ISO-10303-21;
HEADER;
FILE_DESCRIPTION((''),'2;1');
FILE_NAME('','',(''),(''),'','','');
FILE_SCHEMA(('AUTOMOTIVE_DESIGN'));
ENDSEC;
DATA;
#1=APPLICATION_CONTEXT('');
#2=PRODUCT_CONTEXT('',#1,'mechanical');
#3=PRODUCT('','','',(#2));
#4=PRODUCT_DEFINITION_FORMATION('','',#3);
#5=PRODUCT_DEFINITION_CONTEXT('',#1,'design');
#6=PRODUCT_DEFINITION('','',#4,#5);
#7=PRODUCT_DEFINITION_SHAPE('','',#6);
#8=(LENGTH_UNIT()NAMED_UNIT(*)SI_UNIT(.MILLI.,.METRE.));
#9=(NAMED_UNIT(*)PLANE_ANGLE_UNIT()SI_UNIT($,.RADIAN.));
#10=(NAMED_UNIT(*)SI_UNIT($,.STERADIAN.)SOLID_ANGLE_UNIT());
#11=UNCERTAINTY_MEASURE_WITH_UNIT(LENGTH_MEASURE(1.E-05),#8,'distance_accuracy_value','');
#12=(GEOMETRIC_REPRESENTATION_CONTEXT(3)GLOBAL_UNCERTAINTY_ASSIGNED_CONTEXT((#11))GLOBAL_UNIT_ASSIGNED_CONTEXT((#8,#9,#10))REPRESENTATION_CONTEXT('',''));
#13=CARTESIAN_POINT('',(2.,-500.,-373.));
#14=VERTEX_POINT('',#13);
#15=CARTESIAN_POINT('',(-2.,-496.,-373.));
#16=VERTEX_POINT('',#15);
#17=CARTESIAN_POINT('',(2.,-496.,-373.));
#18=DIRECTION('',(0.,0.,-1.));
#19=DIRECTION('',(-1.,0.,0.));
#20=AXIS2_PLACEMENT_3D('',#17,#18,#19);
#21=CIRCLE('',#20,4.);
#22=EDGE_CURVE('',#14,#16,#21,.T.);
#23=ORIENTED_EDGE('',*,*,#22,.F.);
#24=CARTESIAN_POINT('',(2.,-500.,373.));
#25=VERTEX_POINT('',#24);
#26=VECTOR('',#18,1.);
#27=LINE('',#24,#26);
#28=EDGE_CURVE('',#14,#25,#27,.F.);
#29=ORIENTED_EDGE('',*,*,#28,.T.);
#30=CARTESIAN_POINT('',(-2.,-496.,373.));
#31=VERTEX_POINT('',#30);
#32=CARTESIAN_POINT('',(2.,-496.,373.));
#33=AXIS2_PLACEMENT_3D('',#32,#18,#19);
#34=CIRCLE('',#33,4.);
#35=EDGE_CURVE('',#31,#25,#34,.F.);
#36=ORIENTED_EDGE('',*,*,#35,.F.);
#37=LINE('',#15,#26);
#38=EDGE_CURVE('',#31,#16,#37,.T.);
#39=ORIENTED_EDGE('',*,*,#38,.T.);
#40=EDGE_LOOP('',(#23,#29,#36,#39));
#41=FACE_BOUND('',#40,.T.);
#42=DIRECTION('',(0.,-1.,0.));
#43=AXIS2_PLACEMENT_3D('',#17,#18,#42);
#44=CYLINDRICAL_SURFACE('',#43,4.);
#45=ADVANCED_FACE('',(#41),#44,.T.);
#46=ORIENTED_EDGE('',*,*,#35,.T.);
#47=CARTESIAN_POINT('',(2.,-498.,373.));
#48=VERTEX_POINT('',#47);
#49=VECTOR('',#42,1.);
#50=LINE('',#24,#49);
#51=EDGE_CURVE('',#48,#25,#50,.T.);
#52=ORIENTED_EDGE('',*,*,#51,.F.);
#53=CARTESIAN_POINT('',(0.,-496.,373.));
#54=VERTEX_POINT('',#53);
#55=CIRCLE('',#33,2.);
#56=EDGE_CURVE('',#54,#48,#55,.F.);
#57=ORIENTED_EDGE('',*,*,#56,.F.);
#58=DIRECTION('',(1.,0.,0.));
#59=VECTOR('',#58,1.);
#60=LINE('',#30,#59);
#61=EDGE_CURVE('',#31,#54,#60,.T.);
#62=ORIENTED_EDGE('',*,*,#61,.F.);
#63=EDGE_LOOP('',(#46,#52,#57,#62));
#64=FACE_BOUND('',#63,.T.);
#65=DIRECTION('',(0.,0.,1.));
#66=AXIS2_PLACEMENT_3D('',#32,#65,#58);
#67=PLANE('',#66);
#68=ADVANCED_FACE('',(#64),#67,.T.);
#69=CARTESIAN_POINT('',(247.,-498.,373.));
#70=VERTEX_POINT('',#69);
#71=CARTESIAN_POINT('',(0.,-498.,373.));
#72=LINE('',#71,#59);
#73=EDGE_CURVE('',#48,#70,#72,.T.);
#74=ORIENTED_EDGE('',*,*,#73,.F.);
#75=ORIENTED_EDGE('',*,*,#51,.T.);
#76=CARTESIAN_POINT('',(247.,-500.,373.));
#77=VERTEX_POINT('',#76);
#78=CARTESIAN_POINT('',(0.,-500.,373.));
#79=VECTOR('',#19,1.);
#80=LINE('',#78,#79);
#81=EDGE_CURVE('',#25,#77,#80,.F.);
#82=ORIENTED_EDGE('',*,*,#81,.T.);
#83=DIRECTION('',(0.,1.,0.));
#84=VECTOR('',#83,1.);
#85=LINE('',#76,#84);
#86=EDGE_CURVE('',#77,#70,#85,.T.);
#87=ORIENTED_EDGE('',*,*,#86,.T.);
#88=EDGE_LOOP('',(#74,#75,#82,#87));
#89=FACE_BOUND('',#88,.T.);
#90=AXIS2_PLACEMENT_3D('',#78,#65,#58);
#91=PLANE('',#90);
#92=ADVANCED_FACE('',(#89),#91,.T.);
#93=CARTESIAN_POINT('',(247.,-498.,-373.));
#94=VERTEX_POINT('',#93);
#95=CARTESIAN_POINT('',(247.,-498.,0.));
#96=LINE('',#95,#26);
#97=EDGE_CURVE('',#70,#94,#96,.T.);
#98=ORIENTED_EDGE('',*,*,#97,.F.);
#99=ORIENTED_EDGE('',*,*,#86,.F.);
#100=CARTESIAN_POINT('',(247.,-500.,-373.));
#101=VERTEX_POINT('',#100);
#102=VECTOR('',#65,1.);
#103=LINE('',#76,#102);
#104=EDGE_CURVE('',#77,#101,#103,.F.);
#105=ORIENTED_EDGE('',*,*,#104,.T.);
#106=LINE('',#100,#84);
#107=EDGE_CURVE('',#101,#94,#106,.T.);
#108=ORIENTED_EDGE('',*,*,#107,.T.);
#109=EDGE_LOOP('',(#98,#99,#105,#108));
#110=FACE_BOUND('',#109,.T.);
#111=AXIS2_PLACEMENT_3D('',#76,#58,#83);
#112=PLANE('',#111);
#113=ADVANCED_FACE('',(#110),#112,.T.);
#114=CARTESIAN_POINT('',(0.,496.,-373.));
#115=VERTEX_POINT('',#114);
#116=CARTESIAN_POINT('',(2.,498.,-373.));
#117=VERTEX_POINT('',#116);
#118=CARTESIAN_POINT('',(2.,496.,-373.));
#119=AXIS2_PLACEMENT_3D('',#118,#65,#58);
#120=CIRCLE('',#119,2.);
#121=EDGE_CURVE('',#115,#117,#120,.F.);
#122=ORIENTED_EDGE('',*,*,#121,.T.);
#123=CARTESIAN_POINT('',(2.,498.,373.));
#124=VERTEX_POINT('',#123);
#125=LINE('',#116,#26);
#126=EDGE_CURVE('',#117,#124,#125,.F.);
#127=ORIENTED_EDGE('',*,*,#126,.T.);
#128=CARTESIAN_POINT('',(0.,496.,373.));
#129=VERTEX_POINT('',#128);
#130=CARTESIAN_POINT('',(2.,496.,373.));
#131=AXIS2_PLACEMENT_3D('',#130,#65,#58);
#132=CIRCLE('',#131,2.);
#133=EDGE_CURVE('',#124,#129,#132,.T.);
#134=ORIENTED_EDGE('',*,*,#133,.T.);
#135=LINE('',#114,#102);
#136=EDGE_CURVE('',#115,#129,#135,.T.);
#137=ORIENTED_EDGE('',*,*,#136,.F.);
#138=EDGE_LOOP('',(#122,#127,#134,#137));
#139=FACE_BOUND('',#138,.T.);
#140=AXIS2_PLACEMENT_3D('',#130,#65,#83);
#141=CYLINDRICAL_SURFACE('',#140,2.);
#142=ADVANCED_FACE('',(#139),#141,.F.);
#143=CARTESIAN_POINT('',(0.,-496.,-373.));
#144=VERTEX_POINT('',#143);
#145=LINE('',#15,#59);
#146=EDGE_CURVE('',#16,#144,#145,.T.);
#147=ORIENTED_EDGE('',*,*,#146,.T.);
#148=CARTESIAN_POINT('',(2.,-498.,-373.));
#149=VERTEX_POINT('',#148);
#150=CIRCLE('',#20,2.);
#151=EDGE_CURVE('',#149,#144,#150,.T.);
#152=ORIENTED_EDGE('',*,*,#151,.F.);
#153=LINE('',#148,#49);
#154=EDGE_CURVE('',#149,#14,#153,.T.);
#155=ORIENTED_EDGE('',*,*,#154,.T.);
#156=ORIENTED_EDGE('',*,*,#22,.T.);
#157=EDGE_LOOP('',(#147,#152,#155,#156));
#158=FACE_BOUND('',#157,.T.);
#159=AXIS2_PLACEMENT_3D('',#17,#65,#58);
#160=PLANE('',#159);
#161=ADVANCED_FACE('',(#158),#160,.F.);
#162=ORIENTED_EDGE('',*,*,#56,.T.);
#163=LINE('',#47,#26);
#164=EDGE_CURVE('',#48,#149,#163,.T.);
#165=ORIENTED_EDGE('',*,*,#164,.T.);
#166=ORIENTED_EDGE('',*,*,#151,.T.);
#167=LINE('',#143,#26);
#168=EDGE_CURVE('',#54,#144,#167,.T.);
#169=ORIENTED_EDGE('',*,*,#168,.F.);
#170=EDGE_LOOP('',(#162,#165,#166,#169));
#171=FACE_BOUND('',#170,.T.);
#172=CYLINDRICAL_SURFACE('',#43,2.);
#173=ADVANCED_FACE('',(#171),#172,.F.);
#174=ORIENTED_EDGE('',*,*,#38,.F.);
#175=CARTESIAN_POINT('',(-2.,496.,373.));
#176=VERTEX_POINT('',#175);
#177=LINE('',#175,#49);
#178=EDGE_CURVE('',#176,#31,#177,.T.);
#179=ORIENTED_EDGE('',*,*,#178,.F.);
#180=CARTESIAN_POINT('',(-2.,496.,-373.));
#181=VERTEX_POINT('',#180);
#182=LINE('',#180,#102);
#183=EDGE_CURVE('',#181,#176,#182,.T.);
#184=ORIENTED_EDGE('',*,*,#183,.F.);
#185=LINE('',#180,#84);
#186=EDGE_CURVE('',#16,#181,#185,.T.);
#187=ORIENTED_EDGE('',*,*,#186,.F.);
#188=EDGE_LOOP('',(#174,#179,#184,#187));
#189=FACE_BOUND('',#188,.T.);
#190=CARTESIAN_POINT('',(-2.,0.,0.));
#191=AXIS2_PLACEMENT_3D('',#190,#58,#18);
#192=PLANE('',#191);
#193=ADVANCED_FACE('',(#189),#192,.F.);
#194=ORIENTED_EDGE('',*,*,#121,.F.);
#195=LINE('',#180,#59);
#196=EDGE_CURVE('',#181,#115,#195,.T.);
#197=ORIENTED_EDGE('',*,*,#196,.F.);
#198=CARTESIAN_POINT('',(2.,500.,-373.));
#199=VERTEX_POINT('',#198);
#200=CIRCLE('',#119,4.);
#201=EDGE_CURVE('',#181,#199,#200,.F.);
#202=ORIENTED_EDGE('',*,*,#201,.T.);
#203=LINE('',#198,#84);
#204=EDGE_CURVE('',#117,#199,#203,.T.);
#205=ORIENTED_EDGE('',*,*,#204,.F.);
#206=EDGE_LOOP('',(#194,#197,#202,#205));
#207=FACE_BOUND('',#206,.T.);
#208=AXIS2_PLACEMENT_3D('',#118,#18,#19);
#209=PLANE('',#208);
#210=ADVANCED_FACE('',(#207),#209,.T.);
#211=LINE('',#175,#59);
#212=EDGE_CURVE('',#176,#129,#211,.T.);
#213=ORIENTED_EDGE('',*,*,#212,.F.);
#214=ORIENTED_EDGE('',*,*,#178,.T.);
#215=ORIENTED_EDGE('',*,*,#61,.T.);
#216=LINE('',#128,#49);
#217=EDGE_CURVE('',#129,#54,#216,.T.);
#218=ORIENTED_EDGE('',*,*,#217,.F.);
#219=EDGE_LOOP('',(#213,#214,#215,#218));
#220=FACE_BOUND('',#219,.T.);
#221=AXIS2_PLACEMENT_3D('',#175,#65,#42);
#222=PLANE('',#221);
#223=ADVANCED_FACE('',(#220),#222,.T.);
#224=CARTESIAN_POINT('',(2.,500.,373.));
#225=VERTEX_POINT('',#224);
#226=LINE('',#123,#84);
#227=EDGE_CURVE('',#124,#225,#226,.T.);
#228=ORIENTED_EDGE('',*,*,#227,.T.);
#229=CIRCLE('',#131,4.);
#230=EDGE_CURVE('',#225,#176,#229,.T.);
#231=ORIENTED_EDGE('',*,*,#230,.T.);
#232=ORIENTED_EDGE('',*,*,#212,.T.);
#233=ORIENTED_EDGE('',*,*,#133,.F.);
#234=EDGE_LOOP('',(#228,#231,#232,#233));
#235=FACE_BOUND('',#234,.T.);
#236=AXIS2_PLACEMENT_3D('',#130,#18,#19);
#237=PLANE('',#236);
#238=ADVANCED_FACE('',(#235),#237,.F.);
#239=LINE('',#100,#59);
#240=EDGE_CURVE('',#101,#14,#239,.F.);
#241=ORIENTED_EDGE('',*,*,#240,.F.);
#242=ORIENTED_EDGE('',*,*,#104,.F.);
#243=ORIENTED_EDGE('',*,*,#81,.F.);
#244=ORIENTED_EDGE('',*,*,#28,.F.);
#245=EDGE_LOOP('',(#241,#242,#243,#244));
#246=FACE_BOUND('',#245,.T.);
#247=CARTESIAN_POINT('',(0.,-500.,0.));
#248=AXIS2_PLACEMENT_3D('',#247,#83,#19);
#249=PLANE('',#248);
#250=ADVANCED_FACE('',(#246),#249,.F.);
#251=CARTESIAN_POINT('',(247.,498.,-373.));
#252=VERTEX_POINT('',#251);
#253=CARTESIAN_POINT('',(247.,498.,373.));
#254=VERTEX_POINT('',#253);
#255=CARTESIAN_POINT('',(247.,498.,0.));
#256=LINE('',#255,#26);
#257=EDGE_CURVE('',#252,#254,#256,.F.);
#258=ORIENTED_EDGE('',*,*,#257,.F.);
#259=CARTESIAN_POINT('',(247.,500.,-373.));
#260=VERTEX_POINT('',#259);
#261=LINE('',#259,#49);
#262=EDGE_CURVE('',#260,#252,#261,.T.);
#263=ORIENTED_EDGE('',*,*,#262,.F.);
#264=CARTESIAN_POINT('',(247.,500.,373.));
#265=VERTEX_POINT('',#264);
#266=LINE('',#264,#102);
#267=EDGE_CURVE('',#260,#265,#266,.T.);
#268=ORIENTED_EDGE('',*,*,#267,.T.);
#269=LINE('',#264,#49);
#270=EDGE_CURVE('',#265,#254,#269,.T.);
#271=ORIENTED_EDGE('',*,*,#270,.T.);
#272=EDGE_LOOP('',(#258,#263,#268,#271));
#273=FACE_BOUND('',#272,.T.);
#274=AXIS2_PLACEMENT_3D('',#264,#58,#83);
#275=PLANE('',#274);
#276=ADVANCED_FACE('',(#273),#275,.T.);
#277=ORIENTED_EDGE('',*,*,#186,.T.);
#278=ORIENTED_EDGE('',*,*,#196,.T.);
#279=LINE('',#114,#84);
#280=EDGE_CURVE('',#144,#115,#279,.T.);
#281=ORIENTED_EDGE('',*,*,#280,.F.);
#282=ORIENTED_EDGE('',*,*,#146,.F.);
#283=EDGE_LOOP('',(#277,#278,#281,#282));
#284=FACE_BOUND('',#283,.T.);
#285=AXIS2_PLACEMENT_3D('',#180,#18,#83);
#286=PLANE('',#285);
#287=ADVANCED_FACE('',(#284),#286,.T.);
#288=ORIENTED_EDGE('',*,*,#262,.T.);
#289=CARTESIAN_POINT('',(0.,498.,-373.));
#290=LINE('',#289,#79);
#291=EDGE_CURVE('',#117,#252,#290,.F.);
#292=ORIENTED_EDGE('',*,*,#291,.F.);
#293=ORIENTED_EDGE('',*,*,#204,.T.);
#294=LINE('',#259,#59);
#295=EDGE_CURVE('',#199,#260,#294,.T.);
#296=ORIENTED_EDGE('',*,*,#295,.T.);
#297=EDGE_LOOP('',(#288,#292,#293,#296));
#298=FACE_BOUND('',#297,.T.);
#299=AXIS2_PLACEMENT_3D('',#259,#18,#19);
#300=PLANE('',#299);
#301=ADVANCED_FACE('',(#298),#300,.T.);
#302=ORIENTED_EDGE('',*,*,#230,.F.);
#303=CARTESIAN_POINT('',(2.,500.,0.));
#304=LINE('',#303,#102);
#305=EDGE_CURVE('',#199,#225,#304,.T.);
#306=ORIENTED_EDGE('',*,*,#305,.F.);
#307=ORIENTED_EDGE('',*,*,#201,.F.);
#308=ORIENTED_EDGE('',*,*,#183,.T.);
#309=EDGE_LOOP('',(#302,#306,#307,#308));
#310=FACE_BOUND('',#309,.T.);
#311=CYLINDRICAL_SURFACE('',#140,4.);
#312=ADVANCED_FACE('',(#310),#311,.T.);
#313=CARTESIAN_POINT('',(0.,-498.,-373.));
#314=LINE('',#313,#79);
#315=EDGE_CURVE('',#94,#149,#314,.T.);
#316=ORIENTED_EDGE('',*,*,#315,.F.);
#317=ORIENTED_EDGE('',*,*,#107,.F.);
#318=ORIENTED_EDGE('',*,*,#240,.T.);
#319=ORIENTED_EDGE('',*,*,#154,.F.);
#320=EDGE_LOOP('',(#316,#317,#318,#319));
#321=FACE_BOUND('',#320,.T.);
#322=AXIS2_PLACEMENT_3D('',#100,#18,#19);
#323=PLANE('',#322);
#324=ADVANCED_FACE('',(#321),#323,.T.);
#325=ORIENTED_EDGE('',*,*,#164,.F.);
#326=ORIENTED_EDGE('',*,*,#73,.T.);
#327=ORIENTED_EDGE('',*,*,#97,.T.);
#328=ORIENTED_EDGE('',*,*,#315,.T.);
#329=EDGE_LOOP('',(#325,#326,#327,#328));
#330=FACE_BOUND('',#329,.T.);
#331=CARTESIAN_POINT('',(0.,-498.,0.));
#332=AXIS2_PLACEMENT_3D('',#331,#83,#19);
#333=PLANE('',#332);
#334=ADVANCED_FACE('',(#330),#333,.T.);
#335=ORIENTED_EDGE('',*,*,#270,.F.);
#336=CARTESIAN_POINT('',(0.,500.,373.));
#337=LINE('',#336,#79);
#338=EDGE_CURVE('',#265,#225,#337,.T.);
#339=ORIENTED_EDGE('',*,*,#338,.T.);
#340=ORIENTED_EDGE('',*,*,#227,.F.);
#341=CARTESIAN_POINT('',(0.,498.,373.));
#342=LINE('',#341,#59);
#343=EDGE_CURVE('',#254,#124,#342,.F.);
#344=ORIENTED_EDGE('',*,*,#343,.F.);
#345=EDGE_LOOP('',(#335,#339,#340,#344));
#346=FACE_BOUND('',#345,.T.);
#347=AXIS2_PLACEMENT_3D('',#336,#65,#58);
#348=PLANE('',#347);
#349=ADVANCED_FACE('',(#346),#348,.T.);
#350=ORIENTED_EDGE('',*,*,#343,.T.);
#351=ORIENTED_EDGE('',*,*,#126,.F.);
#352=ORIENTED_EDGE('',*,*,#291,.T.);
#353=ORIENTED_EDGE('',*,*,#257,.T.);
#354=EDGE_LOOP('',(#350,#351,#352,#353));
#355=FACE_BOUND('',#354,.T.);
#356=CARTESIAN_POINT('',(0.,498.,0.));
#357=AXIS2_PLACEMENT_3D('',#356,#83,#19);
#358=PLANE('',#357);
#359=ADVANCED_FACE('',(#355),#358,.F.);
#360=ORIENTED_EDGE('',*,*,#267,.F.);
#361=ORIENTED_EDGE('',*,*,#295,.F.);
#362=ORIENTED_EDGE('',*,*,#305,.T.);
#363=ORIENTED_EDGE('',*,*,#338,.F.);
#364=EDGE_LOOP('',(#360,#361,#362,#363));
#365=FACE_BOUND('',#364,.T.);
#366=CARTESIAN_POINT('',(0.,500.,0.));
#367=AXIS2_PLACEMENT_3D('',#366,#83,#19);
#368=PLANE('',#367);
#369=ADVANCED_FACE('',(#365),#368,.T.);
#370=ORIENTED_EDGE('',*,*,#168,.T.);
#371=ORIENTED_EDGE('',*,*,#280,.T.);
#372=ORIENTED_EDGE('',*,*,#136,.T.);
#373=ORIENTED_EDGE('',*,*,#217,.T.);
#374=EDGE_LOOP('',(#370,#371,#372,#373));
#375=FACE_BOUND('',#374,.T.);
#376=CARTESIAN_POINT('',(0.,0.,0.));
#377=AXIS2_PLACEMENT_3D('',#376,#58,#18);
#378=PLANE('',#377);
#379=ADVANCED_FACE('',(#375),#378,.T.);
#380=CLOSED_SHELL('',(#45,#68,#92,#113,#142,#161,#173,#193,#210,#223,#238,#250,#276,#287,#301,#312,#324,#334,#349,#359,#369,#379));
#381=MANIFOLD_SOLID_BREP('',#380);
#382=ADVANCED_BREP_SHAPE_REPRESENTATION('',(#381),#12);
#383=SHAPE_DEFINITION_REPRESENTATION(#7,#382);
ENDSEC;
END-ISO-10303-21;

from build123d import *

# Parameters (mm, degrees)
SKETCH1_W               = 992
SKETCH1_H               = 746
BASE_FLANGE1_DEPTH      = 2
EDGE_FLANGE1_DEPTH      = 746
EDGE_FLANGE1_BEND_DEPTH = 746


# Sheet-metal steps are written as plain solids
with BuildPart() as part:
    # Sketch1 → Base-Flange1 (new body)
    with BuildSketch(Plane.YZ):
        Rectangle(SKETCH1_W, SKETCH1_H)
    extrude(amount=-BASE_FLANGE1_DEPTH)

    # Edge-Flange1 section (across the edge) → Edge-Flange1 (add)
    with BuildSketch(Plane(origin=(0, 498, -373), x_dir=(0, -1, 0), z_dir=(0, 0, 1))):
        with BuildLine():
            Line((-2, 2), (-2, 247))
            Line((-2, 247), (0, 247))
            Line((0, 247), (0, 2))
            ThreePointArc((0, 2), (0.585786438, 0.585786438), (2, 0))
            Line((2, 0), (2, -2))
            ThreePointArc((2, -2), (-0.828427125, -0.828427125), (-2, 2))
        make_face()
    extrude(amount=EDGE_FLANGE1_DEPTH)

    # Edge-Flange1 section 2 (across the edge) → Edge-Flange1 bend (add)
    with BuildSketch(Plane(origin=(0, -498, 373), x_dir=(0, 1, 0), z_dir=(0, 0, -1))):
        with BuildLine():
            Line((-2, 2), (-2, 247))
            Line((-2, 247), (0, 247))
            Line((0, 247), (0, 2))
            ThreePointArc((0, 2), (0.585786438, 0.585786438), (2, 0))
            Line((2, 0), (2, -2))
            ThreePointArc((2, -2), (-0.828427125, -0.828427125), (-2, 2))
        make_face()
    extrude(amount=EDGE_FLANGE1_BEND_DEPTH)


solid = part.part
